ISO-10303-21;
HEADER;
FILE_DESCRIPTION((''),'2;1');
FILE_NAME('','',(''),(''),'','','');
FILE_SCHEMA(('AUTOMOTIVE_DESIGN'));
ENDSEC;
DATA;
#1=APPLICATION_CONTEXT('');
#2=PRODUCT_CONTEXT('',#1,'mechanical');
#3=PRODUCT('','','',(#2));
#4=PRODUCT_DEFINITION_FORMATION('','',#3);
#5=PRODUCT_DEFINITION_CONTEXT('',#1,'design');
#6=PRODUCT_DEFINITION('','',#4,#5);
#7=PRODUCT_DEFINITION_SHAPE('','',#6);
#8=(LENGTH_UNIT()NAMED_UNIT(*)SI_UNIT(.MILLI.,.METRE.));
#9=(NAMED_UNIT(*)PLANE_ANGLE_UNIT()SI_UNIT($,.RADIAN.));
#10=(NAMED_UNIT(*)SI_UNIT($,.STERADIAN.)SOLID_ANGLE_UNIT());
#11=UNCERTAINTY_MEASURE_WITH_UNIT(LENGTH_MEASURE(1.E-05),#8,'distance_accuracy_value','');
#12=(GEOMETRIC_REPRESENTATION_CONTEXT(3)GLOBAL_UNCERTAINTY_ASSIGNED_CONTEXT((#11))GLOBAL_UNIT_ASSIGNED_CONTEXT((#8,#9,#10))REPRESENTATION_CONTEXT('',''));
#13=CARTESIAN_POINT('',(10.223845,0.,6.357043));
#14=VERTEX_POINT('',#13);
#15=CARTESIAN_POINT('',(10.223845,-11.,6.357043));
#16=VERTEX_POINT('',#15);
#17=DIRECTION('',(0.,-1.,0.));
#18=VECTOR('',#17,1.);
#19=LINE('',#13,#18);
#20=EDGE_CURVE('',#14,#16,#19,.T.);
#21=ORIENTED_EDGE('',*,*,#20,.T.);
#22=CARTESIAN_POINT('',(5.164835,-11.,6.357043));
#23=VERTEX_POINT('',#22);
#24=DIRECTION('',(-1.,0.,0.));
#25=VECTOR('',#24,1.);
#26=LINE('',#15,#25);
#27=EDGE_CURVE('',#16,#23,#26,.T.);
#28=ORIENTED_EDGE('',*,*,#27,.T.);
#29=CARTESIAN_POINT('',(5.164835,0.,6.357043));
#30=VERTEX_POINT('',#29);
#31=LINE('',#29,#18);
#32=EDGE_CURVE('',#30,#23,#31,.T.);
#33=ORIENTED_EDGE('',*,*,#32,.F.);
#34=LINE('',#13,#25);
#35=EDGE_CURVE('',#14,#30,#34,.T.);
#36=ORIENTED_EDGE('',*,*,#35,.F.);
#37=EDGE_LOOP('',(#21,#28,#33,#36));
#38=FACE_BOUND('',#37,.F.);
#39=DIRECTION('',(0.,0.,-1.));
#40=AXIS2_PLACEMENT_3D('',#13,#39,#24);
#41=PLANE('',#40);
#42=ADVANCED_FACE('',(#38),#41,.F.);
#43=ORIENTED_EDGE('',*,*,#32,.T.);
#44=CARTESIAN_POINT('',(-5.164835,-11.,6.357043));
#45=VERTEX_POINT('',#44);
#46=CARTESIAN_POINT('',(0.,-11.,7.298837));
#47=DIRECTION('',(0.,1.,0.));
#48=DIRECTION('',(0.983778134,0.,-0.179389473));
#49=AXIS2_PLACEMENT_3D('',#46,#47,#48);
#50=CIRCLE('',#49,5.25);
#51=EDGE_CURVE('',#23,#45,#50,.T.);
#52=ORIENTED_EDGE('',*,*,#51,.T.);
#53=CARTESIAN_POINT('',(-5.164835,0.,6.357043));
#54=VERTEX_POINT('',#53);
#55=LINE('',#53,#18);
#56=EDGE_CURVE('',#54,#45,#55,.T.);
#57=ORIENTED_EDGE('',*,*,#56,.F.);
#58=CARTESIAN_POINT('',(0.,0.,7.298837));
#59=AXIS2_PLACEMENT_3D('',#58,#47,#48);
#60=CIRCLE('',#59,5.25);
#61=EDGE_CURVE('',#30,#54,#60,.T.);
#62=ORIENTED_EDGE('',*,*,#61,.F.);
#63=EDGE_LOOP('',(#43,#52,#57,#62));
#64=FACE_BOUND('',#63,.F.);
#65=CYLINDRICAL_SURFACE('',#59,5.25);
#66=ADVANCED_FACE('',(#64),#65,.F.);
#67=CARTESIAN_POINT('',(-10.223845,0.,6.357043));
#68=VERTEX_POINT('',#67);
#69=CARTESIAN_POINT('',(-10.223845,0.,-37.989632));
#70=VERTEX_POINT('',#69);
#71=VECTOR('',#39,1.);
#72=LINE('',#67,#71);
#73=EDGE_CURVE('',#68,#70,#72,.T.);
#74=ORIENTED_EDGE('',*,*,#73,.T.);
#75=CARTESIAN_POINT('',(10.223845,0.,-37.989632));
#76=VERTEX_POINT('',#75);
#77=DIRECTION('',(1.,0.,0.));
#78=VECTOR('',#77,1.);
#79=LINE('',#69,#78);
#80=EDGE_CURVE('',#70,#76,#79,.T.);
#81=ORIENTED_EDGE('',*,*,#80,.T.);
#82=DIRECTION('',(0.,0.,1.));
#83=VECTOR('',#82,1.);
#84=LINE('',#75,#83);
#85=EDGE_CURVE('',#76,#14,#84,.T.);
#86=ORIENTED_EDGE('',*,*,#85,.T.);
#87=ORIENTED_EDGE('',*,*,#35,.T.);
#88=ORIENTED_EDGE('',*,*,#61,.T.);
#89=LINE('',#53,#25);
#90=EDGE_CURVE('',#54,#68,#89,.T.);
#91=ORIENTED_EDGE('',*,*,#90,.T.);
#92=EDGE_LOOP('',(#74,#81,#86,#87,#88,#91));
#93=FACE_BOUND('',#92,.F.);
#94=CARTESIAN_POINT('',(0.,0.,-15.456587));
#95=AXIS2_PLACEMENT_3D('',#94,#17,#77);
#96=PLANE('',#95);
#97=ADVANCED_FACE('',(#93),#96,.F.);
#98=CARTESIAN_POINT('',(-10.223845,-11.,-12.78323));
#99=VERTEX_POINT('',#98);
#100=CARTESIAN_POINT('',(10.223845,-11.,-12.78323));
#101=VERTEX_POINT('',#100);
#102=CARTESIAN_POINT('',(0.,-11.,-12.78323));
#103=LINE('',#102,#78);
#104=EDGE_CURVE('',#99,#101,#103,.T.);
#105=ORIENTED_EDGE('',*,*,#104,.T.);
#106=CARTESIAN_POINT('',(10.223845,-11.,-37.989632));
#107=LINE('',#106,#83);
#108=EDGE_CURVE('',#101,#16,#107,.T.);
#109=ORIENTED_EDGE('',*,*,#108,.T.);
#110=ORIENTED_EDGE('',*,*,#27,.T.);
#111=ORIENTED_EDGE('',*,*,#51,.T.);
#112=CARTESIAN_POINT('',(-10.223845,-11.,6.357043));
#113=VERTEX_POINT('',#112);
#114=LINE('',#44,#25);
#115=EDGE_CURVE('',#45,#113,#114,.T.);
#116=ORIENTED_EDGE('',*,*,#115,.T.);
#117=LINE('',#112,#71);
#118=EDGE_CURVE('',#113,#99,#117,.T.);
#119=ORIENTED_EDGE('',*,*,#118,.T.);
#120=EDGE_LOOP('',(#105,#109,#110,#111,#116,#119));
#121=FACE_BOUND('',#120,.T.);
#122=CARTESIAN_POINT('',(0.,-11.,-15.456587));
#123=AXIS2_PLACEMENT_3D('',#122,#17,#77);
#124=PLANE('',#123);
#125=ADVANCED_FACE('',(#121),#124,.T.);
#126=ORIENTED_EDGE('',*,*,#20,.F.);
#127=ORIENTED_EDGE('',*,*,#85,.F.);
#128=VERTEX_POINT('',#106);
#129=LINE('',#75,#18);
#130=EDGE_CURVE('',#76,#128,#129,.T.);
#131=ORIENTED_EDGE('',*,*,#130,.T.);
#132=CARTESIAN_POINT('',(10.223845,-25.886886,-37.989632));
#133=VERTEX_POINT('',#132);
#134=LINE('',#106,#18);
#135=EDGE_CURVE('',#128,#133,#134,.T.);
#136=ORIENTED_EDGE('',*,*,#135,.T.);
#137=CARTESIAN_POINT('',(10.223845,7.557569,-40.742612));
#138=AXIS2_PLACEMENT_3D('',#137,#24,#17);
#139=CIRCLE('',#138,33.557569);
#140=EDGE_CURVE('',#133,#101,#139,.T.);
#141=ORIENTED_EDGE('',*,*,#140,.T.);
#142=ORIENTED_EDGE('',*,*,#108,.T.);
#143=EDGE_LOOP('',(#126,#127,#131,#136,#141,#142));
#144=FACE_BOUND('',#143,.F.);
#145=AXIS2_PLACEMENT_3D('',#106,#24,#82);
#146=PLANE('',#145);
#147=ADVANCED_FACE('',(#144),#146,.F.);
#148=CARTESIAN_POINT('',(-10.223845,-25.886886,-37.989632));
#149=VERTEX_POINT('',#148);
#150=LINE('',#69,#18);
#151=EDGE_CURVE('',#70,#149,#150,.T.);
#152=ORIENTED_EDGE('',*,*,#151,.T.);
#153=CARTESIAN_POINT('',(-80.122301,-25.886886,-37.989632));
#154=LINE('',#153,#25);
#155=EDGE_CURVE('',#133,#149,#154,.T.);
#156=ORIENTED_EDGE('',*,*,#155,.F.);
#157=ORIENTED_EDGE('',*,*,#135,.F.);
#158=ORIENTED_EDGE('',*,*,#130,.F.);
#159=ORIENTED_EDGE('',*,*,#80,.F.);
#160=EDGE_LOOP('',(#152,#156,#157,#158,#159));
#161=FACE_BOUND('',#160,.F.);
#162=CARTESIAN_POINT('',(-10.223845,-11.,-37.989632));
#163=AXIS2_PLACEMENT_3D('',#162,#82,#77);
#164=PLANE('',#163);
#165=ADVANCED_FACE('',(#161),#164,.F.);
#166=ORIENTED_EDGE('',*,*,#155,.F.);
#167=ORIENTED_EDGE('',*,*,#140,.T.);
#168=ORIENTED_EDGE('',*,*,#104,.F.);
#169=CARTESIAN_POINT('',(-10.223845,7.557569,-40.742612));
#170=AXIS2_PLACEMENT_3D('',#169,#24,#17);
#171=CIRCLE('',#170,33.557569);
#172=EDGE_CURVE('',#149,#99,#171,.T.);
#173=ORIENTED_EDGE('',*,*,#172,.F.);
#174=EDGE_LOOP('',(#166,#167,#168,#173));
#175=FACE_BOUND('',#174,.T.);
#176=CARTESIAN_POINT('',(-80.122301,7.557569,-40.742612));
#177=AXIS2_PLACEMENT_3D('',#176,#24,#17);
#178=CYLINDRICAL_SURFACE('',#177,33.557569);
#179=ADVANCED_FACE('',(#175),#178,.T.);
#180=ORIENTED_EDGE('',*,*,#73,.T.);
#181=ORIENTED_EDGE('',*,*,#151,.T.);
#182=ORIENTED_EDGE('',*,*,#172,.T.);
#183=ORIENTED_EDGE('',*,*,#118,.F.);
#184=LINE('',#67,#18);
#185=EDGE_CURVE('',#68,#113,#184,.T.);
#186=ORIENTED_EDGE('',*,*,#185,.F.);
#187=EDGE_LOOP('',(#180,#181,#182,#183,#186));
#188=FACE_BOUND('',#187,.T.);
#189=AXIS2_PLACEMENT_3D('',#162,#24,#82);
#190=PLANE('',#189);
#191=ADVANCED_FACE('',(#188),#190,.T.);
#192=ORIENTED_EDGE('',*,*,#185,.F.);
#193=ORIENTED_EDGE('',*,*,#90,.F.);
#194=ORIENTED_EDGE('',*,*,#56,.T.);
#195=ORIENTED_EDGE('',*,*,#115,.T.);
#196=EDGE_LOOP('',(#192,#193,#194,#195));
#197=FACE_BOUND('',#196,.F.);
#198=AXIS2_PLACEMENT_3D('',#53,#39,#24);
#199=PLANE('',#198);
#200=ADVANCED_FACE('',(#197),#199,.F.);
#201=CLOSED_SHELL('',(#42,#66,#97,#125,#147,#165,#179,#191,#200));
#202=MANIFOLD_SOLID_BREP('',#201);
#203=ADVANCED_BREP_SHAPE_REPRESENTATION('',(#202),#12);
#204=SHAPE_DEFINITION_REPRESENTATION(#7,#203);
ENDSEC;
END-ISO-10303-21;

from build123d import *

# Parameters (mm, degrees)
F1_DEPTH    = 11
F2_W        = 20.4476909052
F2_H        = 25.2064025609
F3_DEPTH    = 15
F4_T1_DEPTH = 160.2446021291


# Not quite as in the source:
# - a fillet or chamfer that OpenCascade refuses, or shapes differently, is made with other operations: its cross-section is extruded or revolved along the edge and cut away or added


with BuildPart() as f1:
    # F0 (on Front) → F1 (new body)
    with BuildSketch(Plane.XZ):
        with BuildLine():
            Line((-10.2238454526, -37.989632494), (10.2238454526, -37.989632494))
            Line((10.2238454526, -37.989632494), (10.2238454526, 6.3570427475))
            Line((10.2238454526, 6.3570427475), (5.1648352034, 6.3570427475))
            ThreePointArc((5.1648352034, 6.3570427475), (0, 2.048837482), (-5.1648352034, 6.3570427475))
            Line((-5.1648352034, 6.3570427475), (-10.2238454526, 6.3570427475))
            Line((-10.2238454526, 6.3570427475), (-10.2238454526, -37.989632494))
        make_face()
    extrude(amount=F1_DEPTH)

    # F2 (on face) → F3 (join)
    with BuildSketch(Plane.XZ.offset(11)):
        with Locations((0, -25.3864312136)):
            Rectangle(F2_W, F2_H)
    extrude(amount=F3_DEPTH)

    # F4: fillet of radius 33.557568517 on 1 edges, made by hand

    # F4_s2 → F4_t1 (cut)
    with BuildSketch(Plane.YZ.offset(-80.1223010645)):
        with BuildLine():
            ThreePointArc((-26, -40.7426121779), (-22.0131710898, -24.8781309737), (-11, -12.7832299331))
            Line((-11, -12.7832299331), (-26, -12.7832299331))
            Line((-26, -12.7832299331), (-26, -40.7426121779))
        make_face()
    extrude(amount=F4_T1_DEPTH, mode=Mode.SUBTRACT)


solid = f1.part
